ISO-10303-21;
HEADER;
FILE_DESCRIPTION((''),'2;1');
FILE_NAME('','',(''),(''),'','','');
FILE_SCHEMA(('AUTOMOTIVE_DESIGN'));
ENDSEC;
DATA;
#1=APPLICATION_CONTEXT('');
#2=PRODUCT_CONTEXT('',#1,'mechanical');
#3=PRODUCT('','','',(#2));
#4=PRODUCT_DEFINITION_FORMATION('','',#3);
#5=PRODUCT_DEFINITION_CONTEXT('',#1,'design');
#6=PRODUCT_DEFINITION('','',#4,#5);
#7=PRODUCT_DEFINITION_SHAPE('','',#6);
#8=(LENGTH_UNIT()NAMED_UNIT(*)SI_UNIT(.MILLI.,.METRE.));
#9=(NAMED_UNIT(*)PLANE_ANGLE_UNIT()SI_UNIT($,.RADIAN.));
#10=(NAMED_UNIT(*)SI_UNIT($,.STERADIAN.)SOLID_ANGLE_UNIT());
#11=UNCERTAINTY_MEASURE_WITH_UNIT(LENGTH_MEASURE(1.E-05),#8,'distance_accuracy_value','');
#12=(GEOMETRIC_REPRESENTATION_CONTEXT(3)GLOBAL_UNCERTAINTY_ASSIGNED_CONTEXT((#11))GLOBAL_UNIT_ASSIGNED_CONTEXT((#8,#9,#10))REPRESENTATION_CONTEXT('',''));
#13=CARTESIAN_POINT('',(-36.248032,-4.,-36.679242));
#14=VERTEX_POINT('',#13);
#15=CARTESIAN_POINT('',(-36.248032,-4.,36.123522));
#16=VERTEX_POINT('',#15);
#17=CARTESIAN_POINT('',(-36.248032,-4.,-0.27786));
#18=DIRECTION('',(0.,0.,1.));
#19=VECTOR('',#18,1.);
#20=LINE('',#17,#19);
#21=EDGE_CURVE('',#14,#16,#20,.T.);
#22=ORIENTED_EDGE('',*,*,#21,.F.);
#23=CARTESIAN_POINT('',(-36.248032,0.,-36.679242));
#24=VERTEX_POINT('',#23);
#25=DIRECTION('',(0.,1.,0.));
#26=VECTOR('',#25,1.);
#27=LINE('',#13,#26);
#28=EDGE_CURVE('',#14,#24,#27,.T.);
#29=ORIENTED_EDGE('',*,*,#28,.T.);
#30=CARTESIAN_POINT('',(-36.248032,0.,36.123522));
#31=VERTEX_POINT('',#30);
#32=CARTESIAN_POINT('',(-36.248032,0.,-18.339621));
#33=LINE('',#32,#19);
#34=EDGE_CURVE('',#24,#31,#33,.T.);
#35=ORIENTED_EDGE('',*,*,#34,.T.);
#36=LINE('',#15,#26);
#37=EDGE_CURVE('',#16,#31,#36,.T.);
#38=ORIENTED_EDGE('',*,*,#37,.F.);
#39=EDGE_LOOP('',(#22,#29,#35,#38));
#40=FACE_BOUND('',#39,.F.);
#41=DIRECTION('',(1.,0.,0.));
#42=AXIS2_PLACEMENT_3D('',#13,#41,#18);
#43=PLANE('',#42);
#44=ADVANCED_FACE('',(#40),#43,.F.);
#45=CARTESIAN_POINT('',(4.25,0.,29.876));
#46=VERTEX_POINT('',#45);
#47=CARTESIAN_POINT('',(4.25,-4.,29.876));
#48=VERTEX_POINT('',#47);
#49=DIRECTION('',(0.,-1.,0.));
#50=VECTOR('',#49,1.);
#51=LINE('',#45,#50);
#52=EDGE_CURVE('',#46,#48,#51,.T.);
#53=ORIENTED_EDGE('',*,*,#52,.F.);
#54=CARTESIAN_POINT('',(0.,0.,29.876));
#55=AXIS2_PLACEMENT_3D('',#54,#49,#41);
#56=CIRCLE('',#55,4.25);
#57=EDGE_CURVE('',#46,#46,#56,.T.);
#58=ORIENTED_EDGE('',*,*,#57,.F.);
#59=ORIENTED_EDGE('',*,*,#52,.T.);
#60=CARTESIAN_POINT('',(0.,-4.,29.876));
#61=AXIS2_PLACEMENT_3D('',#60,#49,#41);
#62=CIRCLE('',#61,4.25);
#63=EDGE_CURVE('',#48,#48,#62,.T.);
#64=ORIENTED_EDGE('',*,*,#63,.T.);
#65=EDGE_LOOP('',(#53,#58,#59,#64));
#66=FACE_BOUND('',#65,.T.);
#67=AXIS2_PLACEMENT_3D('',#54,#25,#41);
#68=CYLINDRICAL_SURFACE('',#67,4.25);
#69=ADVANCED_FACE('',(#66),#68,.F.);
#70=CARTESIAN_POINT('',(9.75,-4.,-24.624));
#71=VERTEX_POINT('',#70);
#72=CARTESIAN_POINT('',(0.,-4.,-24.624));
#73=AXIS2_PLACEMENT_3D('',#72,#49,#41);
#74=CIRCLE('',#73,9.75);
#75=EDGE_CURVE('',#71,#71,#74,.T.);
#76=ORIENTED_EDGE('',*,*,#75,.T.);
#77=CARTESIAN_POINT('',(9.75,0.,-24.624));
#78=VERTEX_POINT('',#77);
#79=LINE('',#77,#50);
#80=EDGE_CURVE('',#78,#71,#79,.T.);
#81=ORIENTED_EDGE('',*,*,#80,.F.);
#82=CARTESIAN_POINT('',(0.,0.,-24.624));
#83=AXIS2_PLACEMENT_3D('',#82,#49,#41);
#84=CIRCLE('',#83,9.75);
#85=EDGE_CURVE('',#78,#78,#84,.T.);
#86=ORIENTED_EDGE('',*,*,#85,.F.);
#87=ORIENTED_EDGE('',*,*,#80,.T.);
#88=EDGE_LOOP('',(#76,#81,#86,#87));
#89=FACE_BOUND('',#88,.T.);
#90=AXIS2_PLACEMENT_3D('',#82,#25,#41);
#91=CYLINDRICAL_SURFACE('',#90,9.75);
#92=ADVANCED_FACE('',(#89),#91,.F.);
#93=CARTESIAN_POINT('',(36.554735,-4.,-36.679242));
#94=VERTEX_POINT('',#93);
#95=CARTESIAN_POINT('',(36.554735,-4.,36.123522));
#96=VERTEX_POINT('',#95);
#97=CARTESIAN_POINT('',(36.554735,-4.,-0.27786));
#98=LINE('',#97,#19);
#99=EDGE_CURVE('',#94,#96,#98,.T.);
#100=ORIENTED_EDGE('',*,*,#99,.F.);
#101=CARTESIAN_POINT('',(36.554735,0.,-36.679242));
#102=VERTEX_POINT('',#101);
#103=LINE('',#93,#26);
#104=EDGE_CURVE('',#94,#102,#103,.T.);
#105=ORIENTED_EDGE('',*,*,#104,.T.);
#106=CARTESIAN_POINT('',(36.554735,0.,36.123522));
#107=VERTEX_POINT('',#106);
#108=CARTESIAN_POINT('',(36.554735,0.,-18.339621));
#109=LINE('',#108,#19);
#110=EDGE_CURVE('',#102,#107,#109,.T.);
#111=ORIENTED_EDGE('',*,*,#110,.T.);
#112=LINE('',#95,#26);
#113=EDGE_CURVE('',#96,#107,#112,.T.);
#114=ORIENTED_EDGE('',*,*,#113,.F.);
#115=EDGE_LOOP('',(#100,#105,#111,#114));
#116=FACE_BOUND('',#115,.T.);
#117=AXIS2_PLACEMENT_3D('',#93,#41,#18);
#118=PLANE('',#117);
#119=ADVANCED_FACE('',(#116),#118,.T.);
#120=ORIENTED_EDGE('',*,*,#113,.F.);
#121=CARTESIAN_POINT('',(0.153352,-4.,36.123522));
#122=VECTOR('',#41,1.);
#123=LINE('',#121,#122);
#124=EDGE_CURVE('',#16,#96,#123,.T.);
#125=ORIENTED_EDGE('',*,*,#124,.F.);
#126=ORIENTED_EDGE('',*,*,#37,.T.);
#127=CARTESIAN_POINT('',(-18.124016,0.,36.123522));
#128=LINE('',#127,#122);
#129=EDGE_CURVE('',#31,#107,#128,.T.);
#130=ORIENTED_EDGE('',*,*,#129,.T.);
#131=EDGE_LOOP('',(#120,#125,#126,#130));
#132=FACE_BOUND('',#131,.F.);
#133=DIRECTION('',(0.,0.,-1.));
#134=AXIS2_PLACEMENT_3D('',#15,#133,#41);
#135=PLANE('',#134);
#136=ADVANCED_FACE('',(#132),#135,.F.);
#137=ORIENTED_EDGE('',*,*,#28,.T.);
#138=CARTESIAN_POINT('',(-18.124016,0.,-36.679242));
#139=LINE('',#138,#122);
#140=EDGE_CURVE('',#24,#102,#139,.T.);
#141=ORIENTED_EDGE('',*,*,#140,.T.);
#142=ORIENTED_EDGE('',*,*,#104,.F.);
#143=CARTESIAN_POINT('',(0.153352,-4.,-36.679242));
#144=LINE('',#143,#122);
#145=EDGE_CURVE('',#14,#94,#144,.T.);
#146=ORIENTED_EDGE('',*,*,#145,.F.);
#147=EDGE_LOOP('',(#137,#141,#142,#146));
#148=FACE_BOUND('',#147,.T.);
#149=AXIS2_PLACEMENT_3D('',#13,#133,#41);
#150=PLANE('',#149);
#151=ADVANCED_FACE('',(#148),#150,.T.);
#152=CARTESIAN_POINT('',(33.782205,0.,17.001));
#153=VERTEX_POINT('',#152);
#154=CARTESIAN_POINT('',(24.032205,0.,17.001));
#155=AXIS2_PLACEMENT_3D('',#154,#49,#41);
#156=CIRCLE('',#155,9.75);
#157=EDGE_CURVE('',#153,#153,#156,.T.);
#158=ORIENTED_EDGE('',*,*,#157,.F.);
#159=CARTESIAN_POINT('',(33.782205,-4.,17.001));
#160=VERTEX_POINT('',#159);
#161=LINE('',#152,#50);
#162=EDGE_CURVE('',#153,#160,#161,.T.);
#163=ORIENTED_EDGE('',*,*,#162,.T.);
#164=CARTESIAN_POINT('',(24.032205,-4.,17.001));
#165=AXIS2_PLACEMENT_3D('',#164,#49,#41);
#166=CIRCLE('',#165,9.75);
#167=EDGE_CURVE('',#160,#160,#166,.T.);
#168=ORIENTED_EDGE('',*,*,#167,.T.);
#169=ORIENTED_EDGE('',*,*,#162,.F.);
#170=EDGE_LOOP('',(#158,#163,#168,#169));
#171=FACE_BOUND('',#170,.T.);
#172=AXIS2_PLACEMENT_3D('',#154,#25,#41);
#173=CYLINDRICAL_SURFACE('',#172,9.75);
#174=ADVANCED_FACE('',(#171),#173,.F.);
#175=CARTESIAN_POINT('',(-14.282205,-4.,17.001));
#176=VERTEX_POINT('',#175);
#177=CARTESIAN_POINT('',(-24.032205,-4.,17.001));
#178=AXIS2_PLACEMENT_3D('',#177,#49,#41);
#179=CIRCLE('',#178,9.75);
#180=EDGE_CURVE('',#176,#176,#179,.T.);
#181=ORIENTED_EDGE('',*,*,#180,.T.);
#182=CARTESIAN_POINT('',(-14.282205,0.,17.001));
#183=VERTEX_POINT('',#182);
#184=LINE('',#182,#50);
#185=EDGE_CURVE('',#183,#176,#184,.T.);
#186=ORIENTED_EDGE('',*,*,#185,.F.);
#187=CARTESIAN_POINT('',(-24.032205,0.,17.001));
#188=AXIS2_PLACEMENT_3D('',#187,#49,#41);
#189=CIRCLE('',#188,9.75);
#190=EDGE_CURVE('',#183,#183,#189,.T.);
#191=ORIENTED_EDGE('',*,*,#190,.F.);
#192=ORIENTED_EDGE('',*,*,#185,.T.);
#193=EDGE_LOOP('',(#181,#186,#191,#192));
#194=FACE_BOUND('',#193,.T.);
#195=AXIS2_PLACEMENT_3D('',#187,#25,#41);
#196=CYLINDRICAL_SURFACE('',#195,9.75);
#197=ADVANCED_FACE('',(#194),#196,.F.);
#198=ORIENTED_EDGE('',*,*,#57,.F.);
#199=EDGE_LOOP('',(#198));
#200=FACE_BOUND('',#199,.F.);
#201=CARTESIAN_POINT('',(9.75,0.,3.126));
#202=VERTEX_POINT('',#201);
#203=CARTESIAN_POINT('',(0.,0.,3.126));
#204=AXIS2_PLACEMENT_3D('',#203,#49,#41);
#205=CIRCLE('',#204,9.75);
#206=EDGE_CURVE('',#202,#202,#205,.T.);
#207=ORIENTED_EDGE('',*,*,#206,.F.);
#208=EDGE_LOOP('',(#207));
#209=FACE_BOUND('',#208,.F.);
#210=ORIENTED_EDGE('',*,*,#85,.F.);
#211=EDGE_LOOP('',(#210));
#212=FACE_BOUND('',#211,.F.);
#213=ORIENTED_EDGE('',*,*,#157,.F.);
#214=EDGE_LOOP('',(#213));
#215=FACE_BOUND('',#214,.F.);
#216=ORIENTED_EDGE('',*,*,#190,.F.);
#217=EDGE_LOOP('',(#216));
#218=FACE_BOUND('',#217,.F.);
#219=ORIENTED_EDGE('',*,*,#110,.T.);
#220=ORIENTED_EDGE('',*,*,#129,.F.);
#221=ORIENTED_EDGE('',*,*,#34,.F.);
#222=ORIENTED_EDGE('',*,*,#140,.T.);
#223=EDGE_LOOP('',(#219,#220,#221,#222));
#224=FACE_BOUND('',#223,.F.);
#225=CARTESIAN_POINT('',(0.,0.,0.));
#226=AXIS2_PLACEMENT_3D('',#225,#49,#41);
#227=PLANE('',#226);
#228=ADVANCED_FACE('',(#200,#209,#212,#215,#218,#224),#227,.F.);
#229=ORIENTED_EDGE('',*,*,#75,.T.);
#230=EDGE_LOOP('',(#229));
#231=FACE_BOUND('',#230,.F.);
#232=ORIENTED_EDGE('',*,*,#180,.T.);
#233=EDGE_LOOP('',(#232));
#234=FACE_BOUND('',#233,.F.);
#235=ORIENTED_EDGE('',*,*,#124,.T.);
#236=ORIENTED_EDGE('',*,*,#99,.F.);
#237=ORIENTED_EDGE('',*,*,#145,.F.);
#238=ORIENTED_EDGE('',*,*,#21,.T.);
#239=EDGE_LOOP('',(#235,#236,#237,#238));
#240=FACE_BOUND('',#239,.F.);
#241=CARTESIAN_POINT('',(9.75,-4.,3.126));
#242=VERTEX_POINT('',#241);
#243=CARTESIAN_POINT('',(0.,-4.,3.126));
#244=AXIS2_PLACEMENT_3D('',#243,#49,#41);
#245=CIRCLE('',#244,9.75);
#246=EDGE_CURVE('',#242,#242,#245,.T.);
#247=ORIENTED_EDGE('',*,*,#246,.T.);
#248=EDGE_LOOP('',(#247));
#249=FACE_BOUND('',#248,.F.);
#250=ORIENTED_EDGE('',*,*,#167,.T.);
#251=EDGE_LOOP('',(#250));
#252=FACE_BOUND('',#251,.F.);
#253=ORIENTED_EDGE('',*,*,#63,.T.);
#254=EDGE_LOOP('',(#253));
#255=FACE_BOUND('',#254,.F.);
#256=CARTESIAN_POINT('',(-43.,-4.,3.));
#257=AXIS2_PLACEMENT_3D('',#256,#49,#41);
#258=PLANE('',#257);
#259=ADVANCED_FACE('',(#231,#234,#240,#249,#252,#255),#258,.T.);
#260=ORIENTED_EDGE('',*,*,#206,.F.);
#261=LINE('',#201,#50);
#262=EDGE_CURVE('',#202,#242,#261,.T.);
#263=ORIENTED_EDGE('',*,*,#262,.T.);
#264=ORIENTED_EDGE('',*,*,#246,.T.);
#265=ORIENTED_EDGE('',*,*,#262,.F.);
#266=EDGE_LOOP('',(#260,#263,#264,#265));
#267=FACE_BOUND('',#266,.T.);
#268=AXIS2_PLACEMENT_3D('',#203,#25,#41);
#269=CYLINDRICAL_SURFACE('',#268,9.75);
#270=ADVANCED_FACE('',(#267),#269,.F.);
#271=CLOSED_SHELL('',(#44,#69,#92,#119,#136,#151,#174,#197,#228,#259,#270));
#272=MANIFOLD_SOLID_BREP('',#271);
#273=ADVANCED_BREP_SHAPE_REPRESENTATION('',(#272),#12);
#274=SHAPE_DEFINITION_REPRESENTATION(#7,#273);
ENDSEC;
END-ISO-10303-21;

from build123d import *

# Parameters (mm, degrees)
F0_W      = 80
F0_H      = 120
F0_R      = 9.75
F0_R_2    = 4.25
F1_DEPTH  = 4
F3_W      = 80
F3_H      = 20
F4_DEPTH  = 10
F5_W      = 6
F5_H      = 6
F5_R      = 0.95
F6_DEPTH  = 10
F7_R      = 2.99999
F11_W     = 97.9346781969
F11_H     = 127.8536170721
F11_W_2   = 72.8027671576
F11_H_2   = 72.8027634323
F12_DEPTH = 10


# Not quite as in the source:
# - a fillet or chamfer is up to 0.001 mm smaller than in the source, because OpenCascade refuses the exact size


with BuildPart() as f1:
    # F0 (on Front) → F1 (new body)
    with BuildSketch(Plane.XZ):
        Rectangle(F0_W, F0_H)
        with Locations((0, -24.624)):
            Circle(F0_R, mode=Mode.SUBTRACT)
        with Locations((-24.032204955, 17.001)):
            Circle(F0_R, mode=Mode.SUBTRACT)
        with Locations((0, 3.126)):
            Circle(F0_R, mode=Mode.SUBTRACT)
        with Locations((0, 29.876)):
            Circle(F0_R_2, mode=Mode.SUBTRACT)
        with Locations((24.032204955, 17.001)):
            Circle(F0_R, mode=Mode.SUBTRACT)
    extrude(amount=F1_DEPTH)

    # F3 (on face) → F4 (cut)
    with BuildSketch(Plane.XZ.offset(4)):
        with Locations((0, -50)):
            Rectangle(F3_W, F3_H)
    extrude(amount=-F4_DEPTH, mode=Mode.SUBTRACT)

    # F8: F6 across plane


with BuildPart() as f6:
    # F5 (on face) → F6 (new body)
    with BuildSketch(Plane.XZ.offset(4)):
        with Locations((43, 3)):
            Rectangle(F5_W, F5_H)
        with Locations((42.5, 3.126)):
            Circle(F5_R, mode=Mode.SUBTRACT)
    extrude(amount=-F6_DEPTH)

    # F7 (radius 3 in the source; OpenCascade refuses exactly that, so slightly less here)
    f7_edges = [f6.edges().sort_by_distance(p)[0] for p in [
        (46, 1, 0),
        (46, 1, 6),
    ]]
    fillet(f7_edges, radius=F7_R)


with BuildPart() as f1_1:
    add(f1.part)
    add(f6.part.mirror(Plane.YZ))


with BuildPart() as f12_tool:
    # F11 (on face) → F12 (new body)
    with BuildSketch(Plane.XZ.offset(4)):
        with Locations((1.1506490409, -1.4746189117)):
            Rectangle(F11_W, F11_H)
        with Locations((0.1533515751, -0.2778600901)):
            Rectangle(F11_W_2, F11_H_2, mode=Mode.SUBTRACT)
    extrude(amount=-F12_DEPTH)


with BuildPart() as f1_2:
    add(f1_1.part)

    # F12: cut by f12_tool
    add(f12_tool.part, mode=Mode.SUBTRACT)


with BuildPart() as f6_1:
    add(f6.part)

    # F12: cut by f12_tool
    add(f12_tool.part, mode=Mode.SUBTRACT)


solid = f1_2.part
